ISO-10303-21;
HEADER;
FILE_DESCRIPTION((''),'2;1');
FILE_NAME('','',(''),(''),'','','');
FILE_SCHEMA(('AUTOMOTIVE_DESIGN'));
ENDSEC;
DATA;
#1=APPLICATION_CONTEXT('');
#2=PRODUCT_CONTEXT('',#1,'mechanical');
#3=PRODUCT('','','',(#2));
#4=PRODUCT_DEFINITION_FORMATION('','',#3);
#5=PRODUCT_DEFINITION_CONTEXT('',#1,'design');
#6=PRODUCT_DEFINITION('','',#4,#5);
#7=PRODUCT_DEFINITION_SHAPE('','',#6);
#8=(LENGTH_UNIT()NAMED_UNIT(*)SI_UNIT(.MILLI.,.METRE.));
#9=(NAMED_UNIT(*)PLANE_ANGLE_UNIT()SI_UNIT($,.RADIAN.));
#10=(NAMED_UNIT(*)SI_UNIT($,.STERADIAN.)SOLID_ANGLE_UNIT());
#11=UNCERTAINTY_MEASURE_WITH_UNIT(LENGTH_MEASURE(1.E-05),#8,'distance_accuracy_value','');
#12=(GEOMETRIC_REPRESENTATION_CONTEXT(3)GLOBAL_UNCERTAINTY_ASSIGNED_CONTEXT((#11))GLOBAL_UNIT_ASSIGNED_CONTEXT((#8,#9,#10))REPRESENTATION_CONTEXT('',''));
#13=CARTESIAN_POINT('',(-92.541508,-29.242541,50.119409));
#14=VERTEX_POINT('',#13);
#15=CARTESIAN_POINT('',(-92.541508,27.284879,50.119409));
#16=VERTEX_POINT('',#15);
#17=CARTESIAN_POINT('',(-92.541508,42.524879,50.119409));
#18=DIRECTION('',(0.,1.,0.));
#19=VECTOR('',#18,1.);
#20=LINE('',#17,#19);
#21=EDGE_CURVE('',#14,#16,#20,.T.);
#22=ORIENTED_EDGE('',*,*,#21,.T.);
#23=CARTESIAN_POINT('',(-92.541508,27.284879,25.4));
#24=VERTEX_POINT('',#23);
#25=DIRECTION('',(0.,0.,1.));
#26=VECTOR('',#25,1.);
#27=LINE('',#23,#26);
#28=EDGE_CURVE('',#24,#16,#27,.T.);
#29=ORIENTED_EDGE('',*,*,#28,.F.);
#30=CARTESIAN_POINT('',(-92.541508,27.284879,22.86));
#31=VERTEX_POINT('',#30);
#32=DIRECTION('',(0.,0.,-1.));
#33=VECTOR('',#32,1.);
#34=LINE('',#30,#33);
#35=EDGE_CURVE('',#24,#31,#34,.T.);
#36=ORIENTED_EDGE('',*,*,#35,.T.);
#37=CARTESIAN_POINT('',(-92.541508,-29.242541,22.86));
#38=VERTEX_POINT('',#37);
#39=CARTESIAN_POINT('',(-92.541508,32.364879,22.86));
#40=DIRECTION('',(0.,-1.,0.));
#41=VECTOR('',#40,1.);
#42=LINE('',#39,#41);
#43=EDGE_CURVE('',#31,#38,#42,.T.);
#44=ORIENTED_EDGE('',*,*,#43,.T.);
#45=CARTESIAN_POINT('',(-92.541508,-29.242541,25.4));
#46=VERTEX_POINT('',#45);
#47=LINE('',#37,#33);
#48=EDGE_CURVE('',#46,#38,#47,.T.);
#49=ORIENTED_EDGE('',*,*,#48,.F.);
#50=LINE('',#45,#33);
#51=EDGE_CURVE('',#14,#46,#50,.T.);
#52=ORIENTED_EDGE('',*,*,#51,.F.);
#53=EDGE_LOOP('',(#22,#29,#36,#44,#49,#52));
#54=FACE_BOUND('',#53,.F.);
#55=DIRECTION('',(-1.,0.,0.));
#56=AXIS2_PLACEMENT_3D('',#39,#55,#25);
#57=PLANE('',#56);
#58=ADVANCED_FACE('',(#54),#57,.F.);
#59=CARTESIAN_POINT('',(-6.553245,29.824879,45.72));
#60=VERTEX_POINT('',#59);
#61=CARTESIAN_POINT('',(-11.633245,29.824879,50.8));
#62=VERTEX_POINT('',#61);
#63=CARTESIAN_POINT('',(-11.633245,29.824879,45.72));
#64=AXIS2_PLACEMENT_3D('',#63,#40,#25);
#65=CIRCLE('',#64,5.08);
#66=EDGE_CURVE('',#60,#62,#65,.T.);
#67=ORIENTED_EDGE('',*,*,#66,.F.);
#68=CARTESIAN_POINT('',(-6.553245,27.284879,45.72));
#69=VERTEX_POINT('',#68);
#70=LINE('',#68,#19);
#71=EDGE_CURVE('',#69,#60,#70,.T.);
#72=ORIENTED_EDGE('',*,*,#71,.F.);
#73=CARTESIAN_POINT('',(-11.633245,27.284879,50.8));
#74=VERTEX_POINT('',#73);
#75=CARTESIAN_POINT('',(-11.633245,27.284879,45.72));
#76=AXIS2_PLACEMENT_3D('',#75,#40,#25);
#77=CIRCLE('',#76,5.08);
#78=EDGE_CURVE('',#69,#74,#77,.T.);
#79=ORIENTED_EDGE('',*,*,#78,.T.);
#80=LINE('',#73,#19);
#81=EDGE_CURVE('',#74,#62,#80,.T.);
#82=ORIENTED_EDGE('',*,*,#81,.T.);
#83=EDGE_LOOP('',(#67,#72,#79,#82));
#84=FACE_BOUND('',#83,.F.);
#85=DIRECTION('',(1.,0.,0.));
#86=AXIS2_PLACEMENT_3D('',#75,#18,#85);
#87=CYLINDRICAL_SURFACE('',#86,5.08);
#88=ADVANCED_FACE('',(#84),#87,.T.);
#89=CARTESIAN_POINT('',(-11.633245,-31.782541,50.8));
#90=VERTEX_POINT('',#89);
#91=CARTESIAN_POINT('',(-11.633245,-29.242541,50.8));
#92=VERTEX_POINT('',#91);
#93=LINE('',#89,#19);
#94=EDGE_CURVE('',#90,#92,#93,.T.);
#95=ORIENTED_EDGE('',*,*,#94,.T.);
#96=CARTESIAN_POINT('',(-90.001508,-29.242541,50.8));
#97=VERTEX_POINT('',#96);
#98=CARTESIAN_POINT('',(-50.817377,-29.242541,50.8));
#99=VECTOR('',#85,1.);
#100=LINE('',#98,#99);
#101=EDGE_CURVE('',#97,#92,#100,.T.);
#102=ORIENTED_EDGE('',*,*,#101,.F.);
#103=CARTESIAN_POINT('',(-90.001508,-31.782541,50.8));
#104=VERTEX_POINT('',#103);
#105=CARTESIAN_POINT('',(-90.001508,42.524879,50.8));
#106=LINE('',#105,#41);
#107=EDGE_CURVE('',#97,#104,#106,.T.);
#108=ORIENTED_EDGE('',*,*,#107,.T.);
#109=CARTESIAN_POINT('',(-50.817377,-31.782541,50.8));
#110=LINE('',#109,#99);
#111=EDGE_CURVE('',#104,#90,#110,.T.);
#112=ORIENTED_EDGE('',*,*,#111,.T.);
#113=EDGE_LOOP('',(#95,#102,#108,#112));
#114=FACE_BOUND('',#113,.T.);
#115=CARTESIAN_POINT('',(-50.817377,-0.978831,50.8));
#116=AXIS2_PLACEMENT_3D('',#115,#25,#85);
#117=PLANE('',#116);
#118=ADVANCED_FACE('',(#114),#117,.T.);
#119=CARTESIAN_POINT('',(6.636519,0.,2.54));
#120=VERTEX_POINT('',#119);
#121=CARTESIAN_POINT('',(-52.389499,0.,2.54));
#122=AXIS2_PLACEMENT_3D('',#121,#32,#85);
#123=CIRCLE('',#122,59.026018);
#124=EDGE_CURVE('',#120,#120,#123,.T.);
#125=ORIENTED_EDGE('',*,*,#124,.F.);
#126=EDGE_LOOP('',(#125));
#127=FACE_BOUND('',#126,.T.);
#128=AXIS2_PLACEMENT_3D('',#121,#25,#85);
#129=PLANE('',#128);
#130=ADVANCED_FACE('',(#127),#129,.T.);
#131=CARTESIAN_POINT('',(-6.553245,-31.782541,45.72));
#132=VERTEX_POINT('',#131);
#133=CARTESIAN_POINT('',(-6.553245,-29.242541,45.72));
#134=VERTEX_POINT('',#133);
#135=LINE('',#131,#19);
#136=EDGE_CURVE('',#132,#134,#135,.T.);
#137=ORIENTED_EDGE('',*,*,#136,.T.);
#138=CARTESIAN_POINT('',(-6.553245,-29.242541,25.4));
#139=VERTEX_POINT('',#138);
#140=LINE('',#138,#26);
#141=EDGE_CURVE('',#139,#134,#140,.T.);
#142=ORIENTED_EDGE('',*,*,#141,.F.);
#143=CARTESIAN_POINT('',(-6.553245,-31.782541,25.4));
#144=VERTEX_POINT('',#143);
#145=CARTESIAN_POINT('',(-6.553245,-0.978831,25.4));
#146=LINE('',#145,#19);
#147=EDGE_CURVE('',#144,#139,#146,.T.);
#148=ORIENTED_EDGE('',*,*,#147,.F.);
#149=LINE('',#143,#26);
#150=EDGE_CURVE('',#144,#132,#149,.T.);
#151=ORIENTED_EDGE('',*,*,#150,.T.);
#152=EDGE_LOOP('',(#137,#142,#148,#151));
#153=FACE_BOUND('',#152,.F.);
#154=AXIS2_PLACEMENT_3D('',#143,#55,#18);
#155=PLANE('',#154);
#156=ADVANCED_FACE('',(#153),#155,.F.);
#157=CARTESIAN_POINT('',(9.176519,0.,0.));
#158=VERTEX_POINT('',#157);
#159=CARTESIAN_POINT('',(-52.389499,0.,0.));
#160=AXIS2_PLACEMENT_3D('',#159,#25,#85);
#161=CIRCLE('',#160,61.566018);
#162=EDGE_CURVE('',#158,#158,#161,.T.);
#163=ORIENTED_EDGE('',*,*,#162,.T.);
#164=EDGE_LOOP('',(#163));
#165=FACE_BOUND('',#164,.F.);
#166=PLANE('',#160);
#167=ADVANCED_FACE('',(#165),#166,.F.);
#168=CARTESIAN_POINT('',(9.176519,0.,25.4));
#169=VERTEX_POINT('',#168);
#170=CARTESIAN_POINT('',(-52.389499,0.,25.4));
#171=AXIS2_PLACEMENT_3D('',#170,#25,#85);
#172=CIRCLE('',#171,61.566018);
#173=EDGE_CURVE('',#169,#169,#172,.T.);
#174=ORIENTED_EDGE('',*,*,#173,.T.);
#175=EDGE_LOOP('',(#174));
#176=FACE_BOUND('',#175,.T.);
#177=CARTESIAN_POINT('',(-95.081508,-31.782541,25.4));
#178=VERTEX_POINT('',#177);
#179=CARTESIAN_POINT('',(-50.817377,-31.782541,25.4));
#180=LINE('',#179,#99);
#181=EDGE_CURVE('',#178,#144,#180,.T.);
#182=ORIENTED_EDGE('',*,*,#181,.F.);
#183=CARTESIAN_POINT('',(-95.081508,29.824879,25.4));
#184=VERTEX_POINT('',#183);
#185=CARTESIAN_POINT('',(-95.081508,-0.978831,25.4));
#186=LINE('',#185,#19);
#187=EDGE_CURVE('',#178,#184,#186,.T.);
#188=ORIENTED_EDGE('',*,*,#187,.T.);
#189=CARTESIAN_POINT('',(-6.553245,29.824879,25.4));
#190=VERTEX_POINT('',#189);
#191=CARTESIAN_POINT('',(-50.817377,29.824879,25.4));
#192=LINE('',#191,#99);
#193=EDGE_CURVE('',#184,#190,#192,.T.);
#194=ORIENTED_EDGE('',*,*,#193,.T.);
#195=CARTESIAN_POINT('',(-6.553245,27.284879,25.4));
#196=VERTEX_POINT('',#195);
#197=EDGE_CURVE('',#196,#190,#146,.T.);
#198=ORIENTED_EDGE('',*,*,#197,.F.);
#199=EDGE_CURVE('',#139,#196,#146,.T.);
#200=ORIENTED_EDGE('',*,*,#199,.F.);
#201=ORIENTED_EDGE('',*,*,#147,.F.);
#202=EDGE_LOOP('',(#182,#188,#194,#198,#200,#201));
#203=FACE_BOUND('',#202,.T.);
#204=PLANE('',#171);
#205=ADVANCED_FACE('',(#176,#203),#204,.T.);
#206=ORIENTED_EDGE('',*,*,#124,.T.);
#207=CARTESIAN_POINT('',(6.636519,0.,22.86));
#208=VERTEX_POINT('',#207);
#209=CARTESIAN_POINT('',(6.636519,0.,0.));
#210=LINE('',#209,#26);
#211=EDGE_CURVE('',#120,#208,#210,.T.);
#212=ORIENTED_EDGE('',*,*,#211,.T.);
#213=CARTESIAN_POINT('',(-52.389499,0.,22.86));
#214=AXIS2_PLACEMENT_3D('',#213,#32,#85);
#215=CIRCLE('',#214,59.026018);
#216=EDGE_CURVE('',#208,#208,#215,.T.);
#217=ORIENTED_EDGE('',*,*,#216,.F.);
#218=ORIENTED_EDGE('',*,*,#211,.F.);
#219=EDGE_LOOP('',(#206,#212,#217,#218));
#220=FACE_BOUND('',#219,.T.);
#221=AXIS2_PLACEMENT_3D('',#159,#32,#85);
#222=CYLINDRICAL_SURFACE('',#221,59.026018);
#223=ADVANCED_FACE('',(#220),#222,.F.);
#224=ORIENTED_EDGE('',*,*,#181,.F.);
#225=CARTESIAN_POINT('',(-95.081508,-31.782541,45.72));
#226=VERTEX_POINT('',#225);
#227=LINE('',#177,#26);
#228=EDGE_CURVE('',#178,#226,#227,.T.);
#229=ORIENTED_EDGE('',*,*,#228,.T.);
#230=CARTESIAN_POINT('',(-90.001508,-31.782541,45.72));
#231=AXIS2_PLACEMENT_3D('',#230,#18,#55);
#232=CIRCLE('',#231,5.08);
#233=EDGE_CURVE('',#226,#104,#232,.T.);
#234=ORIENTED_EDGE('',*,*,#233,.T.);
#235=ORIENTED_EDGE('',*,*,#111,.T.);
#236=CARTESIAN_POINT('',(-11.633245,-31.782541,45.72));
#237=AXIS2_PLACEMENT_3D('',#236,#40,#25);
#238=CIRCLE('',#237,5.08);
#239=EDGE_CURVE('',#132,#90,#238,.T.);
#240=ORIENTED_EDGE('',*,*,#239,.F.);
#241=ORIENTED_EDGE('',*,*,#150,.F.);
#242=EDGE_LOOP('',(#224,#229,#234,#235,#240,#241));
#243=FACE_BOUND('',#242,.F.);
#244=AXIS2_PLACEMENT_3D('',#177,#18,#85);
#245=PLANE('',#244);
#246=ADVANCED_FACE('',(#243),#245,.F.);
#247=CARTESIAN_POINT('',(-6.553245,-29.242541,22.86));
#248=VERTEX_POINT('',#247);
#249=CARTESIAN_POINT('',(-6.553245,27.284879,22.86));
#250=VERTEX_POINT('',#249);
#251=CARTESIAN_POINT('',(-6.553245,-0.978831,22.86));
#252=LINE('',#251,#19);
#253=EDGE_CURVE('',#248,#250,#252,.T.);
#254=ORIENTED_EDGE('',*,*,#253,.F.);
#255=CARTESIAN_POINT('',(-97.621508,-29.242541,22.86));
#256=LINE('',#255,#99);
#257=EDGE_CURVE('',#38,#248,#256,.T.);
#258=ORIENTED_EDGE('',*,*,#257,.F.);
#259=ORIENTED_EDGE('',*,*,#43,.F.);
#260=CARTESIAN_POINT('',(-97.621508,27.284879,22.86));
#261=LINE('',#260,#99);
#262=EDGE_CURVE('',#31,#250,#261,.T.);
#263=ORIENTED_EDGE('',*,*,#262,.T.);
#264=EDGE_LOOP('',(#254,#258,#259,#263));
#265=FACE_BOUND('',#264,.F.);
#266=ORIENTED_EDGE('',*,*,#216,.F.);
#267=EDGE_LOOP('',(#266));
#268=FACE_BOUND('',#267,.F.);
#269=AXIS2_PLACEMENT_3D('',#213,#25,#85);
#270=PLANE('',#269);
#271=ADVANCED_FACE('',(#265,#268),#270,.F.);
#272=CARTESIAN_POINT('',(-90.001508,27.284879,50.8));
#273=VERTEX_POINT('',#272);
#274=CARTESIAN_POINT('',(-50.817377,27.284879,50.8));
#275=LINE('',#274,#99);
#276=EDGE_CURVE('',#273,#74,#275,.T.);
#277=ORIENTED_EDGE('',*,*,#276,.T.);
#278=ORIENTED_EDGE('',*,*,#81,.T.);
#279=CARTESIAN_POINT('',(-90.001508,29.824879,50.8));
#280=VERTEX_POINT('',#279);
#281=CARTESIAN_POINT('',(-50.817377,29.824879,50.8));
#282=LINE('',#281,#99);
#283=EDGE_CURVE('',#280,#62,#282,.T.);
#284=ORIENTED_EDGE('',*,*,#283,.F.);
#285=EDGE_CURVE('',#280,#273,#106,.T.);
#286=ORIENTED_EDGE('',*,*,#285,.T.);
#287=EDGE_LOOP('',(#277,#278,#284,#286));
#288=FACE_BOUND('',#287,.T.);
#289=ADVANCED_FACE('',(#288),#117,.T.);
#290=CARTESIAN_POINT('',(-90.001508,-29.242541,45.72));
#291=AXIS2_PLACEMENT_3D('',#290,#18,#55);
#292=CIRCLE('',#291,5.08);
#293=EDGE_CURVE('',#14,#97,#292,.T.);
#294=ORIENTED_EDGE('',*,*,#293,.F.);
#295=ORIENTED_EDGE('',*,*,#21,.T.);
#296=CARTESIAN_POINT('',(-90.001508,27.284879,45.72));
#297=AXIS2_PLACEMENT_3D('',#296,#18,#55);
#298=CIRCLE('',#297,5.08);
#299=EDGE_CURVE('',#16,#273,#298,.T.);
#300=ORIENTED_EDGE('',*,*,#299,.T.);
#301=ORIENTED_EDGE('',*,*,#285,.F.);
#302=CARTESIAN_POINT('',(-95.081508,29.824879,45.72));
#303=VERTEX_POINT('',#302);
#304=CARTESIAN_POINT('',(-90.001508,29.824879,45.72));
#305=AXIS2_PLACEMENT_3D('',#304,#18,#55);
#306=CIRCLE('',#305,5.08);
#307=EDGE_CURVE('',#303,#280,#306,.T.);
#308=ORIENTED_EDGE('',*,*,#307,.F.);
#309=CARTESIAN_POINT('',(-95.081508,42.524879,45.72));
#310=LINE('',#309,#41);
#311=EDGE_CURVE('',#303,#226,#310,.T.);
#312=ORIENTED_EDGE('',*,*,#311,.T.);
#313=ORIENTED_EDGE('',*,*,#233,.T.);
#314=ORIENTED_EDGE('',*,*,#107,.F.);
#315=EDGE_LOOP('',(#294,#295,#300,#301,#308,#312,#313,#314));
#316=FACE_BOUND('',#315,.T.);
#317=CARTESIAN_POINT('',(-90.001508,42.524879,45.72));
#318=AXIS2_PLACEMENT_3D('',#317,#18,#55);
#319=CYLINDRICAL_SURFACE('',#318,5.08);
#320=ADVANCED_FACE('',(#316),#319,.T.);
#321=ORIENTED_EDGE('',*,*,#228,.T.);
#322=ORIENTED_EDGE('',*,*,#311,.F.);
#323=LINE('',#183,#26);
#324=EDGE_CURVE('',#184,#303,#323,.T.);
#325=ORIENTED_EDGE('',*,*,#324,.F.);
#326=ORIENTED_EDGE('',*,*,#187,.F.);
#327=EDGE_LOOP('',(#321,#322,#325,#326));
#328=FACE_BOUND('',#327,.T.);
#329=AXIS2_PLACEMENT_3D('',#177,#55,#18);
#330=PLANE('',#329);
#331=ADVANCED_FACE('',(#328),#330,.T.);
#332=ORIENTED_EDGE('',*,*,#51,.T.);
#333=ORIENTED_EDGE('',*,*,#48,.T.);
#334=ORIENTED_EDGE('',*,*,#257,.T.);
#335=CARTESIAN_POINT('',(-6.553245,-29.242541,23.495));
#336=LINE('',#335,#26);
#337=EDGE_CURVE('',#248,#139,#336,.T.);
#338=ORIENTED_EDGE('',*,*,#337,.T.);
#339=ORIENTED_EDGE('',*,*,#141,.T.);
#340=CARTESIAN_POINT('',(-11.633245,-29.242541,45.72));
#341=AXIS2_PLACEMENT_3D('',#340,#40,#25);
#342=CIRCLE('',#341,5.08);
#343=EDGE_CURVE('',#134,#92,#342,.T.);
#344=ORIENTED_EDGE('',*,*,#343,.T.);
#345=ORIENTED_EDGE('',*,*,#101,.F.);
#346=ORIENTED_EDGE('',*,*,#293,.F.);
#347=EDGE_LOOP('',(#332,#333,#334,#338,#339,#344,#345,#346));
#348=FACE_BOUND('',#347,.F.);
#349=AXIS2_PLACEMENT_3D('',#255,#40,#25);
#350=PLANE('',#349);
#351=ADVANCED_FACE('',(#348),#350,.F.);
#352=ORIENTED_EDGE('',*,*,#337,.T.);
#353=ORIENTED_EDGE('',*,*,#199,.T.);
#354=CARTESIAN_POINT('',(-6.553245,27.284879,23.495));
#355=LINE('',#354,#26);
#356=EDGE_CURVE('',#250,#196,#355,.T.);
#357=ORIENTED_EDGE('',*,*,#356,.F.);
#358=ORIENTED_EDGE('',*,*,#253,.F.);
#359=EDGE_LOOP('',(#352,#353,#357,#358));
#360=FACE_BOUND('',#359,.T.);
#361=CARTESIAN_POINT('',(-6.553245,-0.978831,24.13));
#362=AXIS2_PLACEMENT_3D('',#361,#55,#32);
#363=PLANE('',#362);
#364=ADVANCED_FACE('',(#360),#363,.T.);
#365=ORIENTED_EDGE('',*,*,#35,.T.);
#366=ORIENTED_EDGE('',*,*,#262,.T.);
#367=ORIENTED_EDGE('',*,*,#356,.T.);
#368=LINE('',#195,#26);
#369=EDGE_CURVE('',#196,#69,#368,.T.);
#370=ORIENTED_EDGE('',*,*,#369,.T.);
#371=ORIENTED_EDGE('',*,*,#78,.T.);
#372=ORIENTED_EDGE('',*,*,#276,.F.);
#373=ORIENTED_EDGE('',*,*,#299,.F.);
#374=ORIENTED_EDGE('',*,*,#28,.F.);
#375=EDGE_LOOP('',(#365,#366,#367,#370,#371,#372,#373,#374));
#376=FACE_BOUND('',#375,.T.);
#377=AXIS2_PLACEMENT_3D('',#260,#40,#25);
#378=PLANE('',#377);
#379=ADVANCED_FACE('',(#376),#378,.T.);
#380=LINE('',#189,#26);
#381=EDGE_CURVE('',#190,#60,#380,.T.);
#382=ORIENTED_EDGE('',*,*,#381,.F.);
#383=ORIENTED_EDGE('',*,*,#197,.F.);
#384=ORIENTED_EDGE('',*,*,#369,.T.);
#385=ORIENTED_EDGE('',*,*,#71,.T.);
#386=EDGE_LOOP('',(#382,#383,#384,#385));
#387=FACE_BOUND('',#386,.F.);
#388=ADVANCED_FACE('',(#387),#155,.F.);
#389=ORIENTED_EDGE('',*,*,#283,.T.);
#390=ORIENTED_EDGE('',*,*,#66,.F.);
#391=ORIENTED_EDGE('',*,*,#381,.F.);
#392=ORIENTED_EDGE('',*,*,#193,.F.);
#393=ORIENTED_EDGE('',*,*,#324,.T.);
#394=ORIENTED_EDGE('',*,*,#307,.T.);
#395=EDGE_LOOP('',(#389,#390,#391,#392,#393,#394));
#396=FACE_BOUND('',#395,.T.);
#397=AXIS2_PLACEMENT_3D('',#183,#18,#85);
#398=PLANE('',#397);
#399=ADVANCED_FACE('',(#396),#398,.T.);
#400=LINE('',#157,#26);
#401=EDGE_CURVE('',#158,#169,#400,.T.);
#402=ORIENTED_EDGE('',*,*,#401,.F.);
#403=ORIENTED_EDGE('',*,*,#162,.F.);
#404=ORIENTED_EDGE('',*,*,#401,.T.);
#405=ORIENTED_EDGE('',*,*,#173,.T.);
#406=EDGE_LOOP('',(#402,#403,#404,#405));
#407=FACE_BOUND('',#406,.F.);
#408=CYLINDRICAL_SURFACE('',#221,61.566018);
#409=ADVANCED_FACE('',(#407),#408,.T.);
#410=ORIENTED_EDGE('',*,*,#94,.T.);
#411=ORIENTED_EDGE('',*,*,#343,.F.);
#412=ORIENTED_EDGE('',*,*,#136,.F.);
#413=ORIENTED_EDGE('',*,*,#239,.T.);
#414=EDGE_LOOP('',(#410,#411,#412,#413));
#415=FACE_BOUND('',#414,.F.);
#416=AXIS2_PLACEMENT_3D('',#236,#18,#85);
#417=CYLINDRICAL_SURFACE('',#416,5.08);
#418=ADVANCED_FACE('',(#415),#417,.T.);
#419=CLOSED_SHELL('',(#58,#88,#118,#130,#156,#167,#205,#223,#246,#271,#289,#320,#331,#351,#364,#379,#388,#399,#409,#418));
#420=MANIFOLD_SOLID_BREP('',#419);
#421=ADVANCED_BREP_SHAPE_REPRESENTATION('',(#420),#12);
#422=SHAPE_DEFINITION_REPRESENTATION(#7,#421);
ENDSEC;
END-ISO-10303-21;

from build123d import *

# Parameters (mm, degrees)
F0_R        = 61.5660175878
F1_DEPTH    = 25.4
F2_W        = 88.528262917
F2_H        = 61.6074204445
F3_DEPTH    = 25.4
F4_T        = 2.54
F4_T3_DEPTH = 93.608262917
F4_T5_DEPTH = 66.6874204445
F5_T1_DEPTH = 87.0074204445
F6_R        = 5.08


# Not quite as in the source:
# - a fillet or chamfer that OpenCascade refuses, or shapes differently, is made with other operations: its cross-section is extruded or revolved along the edge and cut away or added
# - a shell that OpenCascade refuses in one call is made with other operations: the cavity is built on its own and cut out


with BuildPart() as f1:
    # F0 (on Top) → F1 (new body)
    with BuildSketch(Plane.XY):
        with Locations((-52.3894988, 0)):
            Circle(F0_R)
    extrude(amount=F1_DEPTH)

    # F2 (on face) → F3 (join)
    with BuildSketch(Plane.XY.offset(25.4)):
        with Locations((-50.8173767012, -0.9788312018)):
            Rectangle(F2_W, F2_H)
    extrude(amount=F3_DEPTH)

    # F4: shell of thickness 2.54, made by hand


with BuildPart() as f4_core1:
    # F4_t2: copy of F1
    add(f1.part)

    # the walls: a layer under each face that stays
    f4_faces = [f4_core1.faces().sort_by_distance(p)[0] for p in [
        (-113.9555163879, 0, 12.7),
        (-52.3894988, 0, 0),
        (-93.4335105253, -41.0440117252, 25.4),
        (-50.8173767012, 29.8248790205, 38.1),
        (-95.0815081596, -0.9788312018, 38.1),
        (-50.8173767012, -31.782541424, 38.1),
    ]]
    thicken(f4_faces, amount=-F4_T, mode=Mode.SUBTRACT)

    # F4_s4 → F4_t3 (cut)
    with BuildSketch(Plane.YZ.offset(-97.6215081596)):
        Polygon((29.8502790205, 25.4254), (29.8248790205, 22.86), (27.2848790205, 22.86), (27.2848790205, 25.4), align=None)
        Polygon((-31.807941424, 25.4254), (-31.782541424, 22.86), (-29.242541424, 22.86), (-29.242541424, 25.4), align=None)
    extrude(amount=F4_T3_DEPTH, mode=Mode.SUBTRACT)

    # F4_s6 → F4_t5 (cut)
    with BuildSketch(Plane.XZ.offset(-32.3648790205)):
        Polygon((-95.1069081596, 25.4254), (-95.0815081596, 22.86), (-92.5415081596, 22.86), (-92.5415081596, 25.4), align=None)
    extrude(amount=F4_T5_DEPTH, mode=Mode.SUBTRACT)


with BuildPart() as f1_1:
    add(f1.part)

    # what is left inside the walls is the cavity
    f4_cavity = [f4_core1.part.solids().sort_by_distance(p)[0] for p in [
        (-52.389499, -19.675339, 2.5654),
    ]]
    add(f4_cavity, mode=Mode.SUBTRACT)

    # F5: fillet of radius 5.08 on 1 edges, made by hand

    # F5_s2 → F5_t1 (cut)
    with BuildSketch(Plane.XZ.offset(-42.5248790205)):
        with BuildLine():
            ThreePointArc((-95.0815081596, 45.72), (-93.5936106081, 49.3121024484), (-90.0015081596, 50.8))
            Line((-90.0015081596, 50.8), (-95.0815081596, 50.8))
            Line((-95.0815081596, 50.8), (-95.0815081596, 45.72))
        make_face()
    extrude(amount=F5_T1_DEPTH, mode=Mode.SUBTRACT)

    # F6
    f6_edges = [f1_1.edges().sort_by_distance(p)[0] for p in [
        (-6.553245, -30.512541, 50.8),
        (-6.553245, 28.554879, 50.8),
    ]]
    fillet(f6_edges, radius=F6_R)


solid = f1_1.part
